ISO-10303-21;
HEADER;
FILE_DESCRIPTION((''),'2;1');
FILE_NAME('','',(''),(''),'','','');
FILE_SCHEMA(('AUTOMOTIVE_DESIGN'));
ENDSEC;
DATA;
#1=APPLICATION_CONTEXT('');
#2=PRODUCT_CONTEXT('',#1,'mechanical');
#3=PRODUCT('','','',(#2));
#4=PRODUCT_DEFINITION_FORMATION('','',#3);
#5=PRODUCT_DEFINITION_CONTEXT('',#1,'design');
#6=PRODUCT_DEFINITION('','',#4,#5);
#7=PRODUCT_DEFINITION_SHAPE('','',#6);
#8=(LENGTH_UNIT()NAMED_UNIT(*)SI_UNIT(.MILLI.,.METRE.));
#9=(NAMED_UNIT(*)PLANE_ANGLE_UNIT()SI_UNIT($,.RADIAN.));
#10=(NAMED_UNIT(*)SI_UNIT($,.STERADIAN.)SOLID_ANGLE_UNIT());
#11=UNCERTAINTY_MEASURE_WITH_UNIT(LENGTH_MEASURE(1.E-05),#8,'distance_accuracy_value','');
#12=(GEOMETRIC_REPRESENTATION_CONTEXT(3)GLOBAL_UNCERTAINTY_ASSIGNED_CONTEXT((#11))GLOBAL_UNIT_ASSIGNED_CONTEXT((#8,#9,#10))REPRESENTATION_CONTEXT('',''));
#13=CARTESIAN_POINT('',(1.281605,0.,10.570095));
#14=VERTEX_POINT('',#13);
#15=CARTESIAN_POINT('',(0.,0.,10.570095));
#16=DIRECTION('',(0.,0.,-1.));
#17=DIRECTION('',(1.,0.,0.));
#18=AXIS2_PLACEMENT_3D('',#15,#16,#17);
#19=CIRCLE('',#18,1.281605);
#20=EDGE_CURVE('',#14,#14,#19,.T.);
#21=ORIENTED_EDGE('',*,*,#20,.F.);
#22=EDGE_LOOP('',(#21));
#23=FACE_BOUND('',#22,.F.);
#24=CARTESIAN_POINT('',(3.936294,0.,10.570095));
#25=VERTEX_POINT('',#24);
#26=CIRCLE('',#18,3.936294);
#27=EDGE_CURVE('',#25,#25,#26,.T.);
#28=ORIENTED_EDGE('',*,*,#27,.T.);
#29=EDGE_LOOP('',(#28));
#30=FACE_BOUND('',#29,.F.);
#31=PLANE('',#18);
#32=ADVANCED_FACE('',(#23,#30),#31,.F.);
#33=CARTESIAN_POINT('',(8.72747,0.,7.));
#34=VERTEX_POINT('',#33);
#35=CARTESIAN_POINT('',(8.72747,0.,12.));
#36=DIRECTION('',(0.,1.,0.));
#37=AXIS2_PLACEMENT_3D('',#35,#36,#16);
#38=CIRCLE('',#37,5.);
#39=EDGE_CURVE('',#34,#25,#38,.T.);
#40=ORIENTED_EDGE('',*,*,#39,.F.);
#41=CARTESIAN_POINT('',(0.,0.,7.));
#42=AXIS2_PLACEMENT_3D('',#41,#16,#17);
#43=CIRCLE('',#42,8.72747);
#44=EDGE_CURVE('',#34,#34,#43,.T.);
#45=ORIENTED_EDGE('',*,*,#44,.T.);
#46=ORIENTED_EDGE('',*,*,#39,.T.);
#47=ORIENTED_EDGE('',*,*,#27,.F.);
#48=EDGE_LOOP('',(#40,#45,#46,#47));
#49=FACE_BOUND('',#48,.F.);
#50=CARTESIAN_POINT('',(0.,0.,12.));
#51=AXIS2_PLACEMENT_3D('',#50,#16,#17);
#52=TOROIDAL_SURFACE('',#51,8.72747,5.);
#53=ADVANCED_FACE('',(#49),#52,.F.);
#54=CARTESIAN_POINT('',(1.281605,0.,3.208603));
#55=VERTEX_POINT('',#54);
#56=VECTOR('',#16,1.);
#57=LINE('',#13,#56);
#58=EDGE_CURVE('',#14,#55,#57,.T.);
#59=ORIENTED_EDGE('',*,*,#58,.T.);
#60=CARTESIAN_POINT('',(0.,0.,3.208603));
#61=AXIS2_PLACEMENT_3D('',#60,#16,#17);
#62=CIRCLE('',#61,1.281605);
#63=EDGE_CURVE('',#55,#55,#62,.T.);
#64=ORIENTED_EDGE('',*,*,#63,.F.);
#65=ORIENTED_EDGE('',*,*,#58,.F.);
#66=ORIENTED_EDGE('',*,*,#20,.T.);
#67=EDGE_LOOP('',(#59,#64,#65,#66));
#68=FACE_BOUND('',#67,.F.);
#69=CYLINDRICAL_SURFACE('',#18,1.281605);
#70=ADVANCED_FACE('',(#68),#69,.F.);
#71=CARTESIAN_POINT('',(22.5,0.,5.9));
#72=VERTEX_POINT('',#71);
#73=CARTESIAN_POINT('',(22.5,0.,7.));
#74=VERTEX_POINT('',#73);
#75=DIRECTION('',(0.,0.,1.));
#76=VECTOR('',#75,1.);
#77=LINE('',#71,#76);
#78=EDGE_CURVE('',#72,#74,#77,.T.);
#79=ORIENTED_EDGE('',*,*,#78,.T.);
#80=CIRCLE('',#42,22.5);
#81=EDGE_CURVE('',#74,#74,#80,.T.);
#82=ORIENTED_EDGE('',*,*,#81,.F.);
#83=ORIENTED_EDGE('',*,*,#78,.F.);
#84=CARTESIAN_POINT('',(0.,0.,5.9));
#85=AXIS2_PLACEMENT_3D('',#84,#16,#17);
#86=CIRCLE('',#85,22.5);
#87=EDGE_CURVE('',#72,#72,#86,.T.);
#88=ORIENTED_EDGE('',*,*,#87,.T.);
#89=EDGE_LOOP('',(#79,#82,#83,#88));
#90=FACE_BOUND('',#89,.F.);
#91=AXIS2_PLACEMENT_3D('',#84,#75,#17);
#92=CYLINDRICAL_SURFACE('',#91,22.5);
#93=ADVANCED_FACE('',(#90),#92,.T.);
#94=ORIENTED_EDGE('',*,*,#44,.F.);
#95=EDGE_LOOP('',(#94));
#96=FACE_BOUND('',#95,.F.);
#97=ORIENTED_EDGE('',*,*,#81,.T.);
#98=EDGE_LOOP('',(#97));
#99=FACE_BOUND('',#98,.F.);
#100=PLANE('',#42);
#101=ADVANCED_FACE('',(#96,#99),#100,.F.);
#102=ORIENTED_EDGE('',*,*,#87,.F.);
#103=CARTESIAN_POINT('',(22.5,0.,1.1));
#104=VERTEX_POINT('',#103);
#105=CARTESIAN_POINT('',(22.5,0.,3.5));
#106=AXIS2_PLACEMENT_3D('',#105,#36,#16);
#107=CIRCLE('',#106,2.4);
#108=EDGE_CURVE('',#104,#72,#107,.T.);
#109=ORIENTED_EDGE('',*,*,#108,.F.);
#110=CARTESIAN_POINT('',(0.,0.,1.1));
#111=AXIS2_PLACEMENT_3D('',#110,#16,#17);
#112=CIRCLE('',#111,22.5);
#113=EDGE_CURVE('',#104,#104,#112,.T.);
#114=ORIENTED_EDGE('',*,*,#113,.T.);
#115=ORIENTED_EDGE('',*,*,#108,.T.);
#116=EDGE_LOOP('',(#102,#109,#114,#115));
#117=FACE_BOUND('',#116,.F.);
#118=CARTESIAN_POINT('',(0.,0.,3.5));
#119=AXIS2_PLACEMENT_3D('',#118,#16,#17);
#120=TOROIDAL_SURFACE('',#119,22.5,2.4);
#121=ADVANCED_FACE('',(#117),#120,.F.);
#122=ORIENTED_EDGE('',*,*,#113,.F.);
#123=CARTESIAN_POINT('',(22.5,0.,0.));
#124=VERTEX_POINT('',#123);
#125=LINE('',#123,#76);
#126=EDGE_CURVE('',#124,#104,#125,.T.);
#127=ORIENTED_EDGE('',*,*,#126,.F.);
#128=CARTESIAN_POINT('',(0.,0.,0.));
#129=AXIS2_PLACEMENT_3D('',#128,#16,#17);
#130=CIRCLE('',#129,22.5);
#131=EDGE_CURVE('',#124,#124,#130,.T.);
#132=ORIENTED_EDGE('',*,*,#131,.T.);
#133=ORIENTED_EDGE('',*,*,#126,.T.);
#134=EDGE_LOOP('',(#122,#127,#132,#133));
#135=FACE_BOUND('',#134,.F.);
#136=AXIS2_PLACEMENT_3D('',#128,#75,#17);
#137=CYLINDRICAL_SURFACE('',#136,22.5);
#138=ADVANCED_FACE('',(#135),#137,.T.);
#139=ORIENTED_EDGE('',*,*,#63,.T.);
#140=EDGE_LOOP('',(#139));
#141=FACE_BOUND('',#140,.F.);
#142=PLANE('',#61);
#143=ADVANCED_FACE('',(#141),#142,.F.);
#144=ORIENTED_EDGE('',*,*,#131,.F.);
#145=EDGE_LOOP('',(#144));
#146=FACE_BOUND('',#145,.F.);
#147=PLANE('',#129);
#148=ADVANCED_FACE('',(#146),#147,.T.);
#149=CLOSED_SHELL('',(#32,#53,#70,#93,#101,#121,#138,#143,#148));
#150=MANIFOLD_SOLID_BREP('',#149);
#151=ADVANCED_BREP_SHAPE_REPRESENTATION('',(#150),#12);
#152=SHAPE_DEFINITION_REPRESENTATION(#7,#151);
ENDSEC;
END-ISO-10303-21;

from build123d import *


# Not quite as in the source:
# - a fillet or chamfer that OpenCascade refuses, or shapes differently, is made with other operations: its cross-section is extruded or revolved along the edge and cut away or added


with BuildPart() as f1:
    # F0 (on Front) → F1 (revolve)
    with BuildSketch(Plane.XZ):
        with BuildLine():
            Line((0, 3.2086027786), (0, 0))
            Line((0, 0), (22.5, 0))
            Line((22.5, 0), (22.5, 1.1))
            ThreePointArc((22.5, 1.1), (20.1, 3.5), (22.5, 5.9))
            Line((22.5, 5.9), (22.5, 7))
            Line((22.5, 7), (3.9362940006, 7))
            Line((3.9362940006, 7), (3.9362940006, 10.5700949207))
            Line((3.9362940006, 10.5700949207), (1.281605335, 10.5700949207))
            Line((1.281605335, 10.5700949207), (1.281605335, 3.2086027786))
            Line((1.281605335, 3.2086027786), (0, 3.2086027786))
        make_face()
    revolve(axis=Axis((0, 0, 5.2850474603), (0, 0, -1)))

    # F2: fillet of radius 5 on 1 edges, made by hand

    # F2_s1 → F2_t2 (revolve)
    with BuildSketch(Plane.XZ):
        with BuildLine():
            ThreePointArc((8.7274704182, 7), (5.739956853, 7.9906655542), (3.9362940006, 10.5700949207))
            Line((3.9362940006, 10.5700949207), (3.9362940006, 7))
            Line((3.9362940006, 7), (8.7274704182, 7))
        make_face()
    revolve(axis=Axis((0, 0, 7), (0, 0, -1)))


solid = f1.part
